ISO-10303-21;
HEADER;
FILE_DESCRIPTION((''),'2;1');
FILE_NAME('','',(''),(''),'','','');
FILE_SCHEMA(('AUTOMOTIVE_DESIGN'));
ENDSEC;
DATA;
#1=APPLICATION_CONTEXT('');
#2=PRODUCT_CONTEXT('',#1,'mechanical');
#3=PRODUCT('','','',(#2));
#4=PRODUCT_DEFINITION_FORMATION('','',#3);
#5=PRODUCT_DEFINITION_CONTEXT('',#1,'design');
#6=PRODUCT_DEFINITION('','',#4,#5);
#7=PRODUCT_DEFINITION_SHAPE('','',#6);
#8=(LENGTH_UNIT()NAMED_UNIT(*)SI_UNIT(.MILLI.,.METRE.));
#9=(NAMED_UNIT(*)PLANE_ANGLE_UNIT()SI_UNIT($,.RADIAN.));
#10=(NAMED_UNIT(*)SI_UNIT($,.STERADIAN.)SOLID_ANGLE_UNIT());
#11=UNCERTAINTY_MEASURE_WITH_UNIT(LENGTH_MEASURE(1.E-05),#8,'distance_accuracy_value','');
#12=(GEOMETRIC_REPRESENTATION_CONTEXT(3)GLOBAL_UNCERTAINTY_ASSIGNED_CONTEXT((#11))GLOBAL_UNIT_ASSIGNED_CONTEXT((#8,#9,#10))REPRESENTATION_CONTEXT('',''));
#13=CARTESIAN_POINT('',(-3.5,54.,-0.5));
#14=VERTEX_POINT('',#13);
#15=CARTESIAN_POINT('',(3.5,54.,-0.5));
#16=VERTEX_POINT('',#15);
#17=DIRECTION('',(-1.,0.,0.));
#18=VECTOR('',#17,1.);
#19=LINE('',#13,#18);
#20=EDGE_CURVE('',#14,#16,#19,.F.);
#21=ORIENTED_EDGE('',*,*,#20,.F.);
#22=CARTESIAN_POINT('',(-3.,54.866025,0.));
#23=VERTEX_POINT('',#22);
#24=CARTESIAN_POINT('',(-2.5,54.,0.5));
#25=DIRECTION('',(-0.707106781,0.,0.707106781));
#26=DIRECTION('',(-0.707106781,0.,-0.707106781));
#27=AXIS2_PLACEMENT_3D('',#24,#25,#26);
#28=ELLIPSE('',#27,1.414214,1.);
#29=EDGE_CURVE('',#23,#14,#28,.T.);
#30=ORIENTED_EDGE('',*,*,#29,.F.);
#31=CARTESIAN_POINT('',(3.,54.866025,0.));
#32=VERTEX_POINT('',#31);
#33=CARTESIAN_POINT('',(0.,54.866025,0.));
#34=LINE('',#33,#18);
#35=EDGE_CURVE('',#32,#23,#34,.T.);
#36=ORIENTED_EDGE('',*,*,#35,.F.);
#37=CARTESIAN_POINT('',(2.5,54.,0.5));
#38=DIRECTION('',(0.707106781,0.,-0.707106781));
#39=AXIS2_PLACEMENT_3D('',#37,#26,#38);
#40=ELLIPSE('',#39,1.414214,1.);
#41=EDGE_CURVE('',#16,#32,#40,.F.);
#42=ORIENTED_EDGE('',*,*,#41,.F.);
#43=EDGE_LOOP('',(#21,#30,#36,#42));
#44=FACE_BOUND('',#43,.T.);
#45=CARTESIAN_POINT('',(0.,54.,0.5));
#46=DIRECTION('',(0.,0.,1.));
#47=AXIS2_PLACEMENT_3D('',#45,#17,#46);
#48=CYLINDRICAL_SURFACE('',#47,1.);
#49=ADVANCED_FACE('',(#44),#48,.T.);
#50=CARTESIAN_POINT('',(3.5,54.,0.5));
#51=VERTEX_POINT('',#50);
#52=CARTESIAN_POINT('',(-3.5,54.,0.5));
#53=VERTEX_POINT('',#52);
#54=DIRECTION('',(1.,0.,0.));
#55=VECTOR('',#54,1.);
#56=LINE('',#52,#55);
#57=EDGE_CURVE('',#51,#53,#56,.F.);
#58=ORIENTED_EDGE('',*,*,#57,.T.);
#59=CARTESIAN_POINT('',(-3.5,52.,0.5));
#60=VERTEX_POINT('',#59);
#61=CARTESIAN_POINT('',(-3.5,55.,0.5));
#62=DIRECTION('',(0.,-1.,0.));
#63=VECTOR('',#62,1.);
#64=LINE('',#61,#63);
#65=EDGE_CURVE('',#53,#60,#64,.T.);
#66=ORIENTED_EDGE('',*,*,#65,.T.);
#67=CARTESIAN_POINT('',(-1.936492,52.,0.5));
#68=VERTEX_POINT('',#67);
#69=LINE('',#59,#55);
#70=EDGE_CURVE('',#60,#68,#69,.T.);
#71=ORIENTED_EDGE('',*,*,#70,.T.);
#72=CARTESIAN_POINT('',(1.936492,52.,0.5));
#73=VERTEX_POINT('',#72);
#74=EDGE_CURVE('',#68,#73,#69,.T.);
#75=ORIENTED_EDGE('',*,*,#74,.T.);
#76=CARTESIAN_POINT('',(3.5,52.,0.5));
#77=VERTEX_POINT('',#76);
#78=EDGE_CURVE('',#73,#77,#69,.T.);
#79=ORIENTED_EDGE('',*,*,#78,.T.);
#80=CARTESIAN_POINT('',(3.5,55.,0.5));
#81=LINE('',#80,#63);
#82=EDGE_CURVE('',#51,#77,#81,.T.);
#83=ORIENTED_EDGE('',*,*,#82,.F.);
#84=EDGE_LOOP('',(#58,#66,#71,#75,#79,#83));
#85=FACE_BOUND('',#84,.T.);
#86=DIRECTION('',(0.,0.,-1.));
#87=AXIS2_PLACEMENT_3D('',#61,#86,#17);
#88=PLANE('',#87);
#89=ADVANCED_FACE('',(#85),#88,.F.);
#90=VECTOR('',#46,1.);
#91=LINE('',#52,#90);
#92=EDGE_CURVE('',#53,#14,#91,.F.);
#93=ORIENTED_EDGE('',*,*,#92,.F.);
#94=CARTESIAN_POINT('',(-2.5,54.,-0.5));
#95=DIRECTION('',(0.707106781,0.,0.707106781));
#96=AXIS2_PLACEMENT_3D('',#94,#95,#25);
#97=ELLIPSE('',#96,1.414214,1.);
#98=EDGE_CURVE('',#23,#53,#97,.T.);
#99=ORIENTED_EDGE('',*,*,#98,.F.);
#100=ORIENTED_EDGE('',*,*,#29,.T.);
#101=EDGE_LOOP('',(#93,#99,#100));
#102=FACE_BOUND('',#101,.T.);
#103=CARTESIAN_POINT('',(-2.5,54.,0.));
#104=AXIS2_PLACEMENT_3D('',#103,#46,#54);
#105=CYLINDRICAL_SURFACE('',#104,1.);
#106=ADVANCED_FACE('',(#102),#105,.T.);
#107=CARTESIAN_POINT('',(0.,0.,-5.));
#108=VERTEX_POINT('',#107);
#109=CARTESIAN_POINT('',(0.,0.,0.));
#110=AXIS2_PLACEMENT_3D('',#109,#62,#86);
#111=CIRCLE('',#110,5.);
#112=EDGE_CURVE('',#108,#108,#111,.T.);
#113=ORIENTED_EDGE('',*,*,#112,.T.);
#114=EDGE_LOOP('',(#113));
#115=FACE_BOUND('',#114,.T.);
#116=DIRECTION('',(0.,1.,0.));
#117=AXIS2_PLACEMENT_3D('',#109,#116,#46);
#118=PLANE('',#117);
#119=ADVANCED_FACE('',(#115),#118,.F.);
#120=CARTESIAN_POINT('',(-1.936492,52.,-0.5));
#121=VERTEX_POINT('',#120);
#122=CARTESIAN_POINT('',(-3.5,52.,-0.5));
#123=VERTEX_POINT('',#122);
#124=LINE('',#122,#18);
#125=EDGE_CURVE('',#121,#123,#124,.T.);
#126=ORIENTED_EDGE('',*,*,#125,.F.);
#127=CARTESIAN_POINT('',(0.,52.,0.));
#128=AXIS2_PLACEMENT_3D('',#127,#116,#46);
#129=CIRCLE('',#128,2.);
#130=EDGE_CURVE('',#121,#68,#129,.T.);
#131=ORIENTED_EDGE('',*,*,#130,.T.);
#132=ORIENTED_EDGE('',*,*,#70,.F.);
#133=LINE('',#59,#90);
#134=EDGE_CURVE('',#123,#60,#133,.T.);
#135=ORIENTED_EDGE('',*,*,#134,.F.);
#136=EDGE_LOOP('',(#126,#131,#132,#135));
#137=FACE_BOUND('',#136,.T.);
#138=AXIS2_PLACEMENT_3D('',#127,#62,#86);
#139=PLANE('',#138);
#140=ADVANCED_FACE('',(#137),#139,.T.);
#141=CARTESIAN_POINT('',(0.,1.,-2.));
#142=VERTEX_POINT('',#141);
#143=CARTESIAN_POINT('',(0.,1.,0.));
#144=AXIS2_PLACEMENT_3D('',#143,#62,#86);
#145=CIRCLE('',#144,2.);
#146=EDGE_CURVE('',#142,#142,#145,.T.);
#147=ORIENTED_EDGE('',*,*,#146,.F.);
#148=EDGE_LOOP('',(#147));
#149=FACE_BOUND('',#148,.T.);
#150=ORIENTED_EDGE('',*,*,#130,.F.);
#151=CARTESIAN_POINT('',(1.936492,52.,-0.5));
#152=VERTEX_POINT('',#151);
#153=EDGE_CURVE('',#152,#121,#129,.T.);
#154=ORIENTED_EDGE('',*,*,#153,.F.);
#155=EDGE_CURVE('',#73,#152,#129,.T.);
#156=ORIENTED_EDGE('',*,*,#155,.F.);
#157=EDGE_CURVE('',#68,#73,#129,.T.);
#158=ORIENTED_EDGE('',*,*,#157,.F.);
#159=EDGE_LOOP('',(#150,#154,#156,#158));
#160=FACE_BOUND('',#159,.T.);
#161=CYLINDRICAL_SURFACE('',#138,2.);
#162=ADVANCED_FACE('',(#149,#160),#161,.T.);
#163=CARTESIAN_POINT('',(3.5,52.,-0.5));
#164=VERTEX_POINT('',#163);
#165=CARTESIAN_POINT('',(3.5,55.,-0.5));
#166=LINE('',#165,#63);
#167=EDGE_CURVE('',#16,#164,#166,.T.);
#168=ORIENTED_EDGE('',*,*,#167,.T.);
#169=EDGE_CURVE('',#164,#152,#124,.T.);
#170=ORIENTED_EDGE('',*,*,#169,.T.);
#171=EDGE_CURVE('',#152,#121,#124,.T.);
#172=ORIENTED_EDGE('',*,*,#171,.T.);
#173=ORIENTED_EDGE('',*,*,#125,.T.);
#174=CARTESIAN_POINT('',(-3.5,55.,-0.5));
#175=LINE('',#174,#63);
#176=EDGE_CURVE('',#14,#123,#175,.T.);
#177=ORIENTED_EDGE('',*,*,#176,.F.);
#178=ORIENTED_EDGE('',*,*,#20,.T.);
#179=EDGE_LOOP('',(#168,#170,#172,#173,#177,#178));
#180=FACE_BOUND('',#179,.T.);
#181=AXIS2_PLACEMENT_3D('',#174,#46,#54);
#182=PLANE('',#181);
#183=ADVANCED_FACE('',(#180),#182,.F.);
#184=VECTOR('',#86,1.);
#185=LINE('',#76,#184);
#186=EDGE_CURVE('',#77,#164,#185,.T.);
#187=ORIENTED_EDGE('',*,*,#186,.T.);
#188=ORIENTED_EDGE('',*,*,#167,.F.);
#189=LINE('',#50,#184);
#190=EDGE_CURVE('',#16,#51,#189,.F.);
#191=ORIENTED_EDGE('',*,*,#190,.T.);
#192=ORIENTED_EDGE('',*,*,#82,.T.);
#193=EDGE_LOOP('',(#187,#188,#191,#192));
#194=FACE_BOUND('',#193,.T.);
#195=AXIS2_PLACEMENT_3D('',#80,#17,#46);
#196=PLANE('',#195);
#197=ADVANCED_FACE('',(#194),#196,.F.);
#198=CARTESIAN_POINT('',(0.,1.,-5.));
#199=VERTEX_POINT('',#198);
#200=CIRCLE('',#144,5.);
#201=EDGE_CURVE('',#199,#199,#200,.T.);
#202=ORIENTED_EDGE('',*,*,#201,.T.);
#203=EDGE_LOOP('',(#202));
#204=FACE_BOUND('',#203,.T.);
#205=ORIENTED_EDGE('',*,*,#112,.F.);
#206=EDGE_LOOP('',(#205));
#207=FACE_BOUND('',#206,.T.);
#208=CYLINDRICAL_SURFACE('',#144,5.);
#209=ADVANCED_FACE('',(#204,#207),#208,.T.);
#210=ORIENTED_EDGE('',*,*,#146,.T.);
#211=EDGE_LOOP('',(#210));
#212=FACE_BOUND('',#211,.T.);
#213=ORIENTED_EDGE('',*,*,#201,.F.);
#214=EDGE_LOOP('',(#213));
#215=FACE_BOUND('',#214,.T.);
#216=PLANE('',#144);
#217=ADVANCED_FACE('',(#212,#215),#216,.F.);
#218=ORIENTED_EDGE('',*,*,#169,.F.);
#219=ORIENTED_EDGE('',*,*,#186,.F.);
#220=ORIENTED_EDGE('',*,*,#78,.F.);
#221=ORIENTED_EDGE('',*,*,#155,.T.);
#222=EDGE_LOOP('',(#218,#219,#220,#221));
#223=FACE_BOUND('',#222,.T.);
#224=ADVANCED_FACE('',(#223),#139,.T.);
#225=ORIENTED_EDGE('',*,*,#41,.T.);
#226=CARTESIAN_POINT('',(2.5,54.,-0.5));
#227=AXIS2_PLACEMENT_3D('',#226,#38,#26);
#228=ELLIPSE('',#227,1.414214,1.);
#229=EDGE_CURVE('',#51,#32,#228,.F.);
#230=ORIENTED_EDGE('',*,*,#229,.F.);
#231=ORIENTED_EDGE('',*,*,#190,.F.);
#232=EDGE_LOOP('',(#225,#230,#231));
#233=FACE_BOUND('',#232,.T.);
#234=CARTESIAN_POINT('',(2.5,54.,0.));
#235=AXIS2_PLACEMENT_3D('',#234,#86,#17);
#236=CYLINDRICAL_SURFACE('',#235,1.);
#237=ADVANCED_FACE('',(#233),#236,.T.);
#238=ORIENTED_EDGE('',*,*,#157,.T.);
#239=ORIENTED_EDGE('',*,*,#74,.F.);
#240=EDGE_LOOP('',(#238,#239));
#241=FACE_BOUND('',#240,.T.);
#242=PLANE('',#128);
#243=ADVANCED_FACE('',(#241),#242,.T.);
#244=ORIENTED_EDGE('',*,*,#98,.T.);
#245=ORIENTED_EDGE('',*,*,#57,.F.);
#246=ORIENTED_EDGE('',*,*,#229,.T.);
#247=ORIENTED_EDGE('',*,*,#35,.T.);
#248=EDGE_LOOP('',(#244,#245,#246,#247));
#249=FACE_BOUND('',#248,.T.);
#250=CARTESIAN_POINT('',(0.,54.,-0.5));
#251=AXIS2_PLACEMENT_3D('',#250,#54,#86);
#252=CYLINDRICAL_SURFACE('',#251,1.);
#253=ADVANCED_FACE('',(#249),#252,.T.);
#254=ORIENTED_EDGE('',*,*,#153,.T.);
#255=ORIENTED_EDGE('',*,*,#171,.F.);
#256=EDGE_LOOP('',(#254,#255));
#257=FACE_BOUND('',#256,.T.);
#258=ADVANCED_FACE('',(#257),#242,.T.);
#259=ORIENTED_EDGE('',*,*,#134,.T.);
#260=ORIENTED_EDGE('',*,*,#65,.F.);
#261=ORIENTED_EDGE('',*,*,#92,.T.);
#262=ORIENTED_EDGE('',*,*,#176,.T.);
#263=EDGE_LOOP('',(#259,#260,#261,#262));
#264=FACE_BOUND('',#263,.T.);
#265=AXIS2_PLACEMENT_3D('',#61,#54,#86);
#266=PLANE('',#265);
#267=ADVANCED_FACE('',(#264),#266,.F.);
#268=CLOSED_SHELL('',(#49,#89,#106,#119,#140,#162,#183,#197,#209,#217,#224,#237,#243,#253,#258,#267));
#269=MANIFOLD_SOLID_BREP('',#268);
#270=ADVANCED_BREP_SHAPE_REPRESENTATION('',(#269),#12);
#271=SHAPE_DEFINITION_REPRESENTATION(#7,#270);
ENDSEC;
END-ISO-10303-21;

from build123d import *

# Parameters (mm, degrees)
SKETCH1_R           = 2
BOSS_EXTRUDE1_DEPTH = 52
SKETCH2_R           = 5
BOSS_EXTRUDE2_DEPTH = 1
SKETCH3_W           = 7
SKETCH3_H           = 1
BOSS_EXTRUDE3_DEPTH = 3
FILLET1_R           = 1


with BuildPart() as part:
    # Sketch1 → Boss-Extrude1 (new body)
    with BuildSketch(Plane(origin=(0, 0, 0), x_dir=(1, 0, 0), z_dir=(0, 1, 0))):
        with Locations(Location((0, 0, 0), (0, 0, 90))):
            Circle(SKETCH1_R)
    extrude(amount=BOSS_EXTRUDE1_DEPTH)

    # Sketch2 → Boss-Extrude2 (add)
    with BuildSketch(Plane.XZ):
        with Locations(Location((0, 0, 0), (0, 0, 270))):
            Circle(SKETCH2_R)
    extrude(amount=-BOSS_EXTRUDE2_DEPTH)

    # Sketch3 → Boss-Extrude3 (add)
    with BuildSketch(Plane(origin=(0, 52, 0), x_dir=(1, 0, 0), z_dir=(0, 1, 0))):
        Rectangle(SKETCH3_W, SKETCH3_H)
    extrude(amount=BOSS_EXTRUDE3_DEPTH)

    # Fillet1
    # the kernel refuses this fillet: 1 mm, written as the material it takes off along each edge
    with BuildSketch(Plane(origin=(3.5, 55, 3), x_dir=(0, -1, 0), z_dir=(0, 0, -1)), Plane(origin=(-3.5, 55, -3), x_dir=(0, -1, 0), z_dir=(0, 0, 1))) as fillet1_piece_1:
        with BuildLine():
            CenterArc((FILLET1_R, FILLET1_R), FILLET1_R, 180, 90)
            Line((0, FILLET1_R), (0, 0))
            Line((0, 0), (FILLET1_R, 0))
        make_face()
    extrude(amount=6, mode=Mode.SUBTRACT)
    with BuildSketch(Plane(origin=(6, 55, -0.5), x_dir=(0, -1, 0), z_dir=(-1, 0, 0)), Plane(origin=(-6, 55, 0.5), x_dir=(0, -1, 0), z_dir=(1, 0, 0))) as fillet1_piece_2:
        with BuildLine():
            CenterArc((FILLET1_R, FILLET1_R), FILLET1_R, 180, 90)
            Line((0, FILLET1_R), (0, 0))
            Line((0, 0), (FILLET1_R, 0))
        make_face()
    extrude(amount=12, mode=Mode.SUBTRACT)


solid = part.part
